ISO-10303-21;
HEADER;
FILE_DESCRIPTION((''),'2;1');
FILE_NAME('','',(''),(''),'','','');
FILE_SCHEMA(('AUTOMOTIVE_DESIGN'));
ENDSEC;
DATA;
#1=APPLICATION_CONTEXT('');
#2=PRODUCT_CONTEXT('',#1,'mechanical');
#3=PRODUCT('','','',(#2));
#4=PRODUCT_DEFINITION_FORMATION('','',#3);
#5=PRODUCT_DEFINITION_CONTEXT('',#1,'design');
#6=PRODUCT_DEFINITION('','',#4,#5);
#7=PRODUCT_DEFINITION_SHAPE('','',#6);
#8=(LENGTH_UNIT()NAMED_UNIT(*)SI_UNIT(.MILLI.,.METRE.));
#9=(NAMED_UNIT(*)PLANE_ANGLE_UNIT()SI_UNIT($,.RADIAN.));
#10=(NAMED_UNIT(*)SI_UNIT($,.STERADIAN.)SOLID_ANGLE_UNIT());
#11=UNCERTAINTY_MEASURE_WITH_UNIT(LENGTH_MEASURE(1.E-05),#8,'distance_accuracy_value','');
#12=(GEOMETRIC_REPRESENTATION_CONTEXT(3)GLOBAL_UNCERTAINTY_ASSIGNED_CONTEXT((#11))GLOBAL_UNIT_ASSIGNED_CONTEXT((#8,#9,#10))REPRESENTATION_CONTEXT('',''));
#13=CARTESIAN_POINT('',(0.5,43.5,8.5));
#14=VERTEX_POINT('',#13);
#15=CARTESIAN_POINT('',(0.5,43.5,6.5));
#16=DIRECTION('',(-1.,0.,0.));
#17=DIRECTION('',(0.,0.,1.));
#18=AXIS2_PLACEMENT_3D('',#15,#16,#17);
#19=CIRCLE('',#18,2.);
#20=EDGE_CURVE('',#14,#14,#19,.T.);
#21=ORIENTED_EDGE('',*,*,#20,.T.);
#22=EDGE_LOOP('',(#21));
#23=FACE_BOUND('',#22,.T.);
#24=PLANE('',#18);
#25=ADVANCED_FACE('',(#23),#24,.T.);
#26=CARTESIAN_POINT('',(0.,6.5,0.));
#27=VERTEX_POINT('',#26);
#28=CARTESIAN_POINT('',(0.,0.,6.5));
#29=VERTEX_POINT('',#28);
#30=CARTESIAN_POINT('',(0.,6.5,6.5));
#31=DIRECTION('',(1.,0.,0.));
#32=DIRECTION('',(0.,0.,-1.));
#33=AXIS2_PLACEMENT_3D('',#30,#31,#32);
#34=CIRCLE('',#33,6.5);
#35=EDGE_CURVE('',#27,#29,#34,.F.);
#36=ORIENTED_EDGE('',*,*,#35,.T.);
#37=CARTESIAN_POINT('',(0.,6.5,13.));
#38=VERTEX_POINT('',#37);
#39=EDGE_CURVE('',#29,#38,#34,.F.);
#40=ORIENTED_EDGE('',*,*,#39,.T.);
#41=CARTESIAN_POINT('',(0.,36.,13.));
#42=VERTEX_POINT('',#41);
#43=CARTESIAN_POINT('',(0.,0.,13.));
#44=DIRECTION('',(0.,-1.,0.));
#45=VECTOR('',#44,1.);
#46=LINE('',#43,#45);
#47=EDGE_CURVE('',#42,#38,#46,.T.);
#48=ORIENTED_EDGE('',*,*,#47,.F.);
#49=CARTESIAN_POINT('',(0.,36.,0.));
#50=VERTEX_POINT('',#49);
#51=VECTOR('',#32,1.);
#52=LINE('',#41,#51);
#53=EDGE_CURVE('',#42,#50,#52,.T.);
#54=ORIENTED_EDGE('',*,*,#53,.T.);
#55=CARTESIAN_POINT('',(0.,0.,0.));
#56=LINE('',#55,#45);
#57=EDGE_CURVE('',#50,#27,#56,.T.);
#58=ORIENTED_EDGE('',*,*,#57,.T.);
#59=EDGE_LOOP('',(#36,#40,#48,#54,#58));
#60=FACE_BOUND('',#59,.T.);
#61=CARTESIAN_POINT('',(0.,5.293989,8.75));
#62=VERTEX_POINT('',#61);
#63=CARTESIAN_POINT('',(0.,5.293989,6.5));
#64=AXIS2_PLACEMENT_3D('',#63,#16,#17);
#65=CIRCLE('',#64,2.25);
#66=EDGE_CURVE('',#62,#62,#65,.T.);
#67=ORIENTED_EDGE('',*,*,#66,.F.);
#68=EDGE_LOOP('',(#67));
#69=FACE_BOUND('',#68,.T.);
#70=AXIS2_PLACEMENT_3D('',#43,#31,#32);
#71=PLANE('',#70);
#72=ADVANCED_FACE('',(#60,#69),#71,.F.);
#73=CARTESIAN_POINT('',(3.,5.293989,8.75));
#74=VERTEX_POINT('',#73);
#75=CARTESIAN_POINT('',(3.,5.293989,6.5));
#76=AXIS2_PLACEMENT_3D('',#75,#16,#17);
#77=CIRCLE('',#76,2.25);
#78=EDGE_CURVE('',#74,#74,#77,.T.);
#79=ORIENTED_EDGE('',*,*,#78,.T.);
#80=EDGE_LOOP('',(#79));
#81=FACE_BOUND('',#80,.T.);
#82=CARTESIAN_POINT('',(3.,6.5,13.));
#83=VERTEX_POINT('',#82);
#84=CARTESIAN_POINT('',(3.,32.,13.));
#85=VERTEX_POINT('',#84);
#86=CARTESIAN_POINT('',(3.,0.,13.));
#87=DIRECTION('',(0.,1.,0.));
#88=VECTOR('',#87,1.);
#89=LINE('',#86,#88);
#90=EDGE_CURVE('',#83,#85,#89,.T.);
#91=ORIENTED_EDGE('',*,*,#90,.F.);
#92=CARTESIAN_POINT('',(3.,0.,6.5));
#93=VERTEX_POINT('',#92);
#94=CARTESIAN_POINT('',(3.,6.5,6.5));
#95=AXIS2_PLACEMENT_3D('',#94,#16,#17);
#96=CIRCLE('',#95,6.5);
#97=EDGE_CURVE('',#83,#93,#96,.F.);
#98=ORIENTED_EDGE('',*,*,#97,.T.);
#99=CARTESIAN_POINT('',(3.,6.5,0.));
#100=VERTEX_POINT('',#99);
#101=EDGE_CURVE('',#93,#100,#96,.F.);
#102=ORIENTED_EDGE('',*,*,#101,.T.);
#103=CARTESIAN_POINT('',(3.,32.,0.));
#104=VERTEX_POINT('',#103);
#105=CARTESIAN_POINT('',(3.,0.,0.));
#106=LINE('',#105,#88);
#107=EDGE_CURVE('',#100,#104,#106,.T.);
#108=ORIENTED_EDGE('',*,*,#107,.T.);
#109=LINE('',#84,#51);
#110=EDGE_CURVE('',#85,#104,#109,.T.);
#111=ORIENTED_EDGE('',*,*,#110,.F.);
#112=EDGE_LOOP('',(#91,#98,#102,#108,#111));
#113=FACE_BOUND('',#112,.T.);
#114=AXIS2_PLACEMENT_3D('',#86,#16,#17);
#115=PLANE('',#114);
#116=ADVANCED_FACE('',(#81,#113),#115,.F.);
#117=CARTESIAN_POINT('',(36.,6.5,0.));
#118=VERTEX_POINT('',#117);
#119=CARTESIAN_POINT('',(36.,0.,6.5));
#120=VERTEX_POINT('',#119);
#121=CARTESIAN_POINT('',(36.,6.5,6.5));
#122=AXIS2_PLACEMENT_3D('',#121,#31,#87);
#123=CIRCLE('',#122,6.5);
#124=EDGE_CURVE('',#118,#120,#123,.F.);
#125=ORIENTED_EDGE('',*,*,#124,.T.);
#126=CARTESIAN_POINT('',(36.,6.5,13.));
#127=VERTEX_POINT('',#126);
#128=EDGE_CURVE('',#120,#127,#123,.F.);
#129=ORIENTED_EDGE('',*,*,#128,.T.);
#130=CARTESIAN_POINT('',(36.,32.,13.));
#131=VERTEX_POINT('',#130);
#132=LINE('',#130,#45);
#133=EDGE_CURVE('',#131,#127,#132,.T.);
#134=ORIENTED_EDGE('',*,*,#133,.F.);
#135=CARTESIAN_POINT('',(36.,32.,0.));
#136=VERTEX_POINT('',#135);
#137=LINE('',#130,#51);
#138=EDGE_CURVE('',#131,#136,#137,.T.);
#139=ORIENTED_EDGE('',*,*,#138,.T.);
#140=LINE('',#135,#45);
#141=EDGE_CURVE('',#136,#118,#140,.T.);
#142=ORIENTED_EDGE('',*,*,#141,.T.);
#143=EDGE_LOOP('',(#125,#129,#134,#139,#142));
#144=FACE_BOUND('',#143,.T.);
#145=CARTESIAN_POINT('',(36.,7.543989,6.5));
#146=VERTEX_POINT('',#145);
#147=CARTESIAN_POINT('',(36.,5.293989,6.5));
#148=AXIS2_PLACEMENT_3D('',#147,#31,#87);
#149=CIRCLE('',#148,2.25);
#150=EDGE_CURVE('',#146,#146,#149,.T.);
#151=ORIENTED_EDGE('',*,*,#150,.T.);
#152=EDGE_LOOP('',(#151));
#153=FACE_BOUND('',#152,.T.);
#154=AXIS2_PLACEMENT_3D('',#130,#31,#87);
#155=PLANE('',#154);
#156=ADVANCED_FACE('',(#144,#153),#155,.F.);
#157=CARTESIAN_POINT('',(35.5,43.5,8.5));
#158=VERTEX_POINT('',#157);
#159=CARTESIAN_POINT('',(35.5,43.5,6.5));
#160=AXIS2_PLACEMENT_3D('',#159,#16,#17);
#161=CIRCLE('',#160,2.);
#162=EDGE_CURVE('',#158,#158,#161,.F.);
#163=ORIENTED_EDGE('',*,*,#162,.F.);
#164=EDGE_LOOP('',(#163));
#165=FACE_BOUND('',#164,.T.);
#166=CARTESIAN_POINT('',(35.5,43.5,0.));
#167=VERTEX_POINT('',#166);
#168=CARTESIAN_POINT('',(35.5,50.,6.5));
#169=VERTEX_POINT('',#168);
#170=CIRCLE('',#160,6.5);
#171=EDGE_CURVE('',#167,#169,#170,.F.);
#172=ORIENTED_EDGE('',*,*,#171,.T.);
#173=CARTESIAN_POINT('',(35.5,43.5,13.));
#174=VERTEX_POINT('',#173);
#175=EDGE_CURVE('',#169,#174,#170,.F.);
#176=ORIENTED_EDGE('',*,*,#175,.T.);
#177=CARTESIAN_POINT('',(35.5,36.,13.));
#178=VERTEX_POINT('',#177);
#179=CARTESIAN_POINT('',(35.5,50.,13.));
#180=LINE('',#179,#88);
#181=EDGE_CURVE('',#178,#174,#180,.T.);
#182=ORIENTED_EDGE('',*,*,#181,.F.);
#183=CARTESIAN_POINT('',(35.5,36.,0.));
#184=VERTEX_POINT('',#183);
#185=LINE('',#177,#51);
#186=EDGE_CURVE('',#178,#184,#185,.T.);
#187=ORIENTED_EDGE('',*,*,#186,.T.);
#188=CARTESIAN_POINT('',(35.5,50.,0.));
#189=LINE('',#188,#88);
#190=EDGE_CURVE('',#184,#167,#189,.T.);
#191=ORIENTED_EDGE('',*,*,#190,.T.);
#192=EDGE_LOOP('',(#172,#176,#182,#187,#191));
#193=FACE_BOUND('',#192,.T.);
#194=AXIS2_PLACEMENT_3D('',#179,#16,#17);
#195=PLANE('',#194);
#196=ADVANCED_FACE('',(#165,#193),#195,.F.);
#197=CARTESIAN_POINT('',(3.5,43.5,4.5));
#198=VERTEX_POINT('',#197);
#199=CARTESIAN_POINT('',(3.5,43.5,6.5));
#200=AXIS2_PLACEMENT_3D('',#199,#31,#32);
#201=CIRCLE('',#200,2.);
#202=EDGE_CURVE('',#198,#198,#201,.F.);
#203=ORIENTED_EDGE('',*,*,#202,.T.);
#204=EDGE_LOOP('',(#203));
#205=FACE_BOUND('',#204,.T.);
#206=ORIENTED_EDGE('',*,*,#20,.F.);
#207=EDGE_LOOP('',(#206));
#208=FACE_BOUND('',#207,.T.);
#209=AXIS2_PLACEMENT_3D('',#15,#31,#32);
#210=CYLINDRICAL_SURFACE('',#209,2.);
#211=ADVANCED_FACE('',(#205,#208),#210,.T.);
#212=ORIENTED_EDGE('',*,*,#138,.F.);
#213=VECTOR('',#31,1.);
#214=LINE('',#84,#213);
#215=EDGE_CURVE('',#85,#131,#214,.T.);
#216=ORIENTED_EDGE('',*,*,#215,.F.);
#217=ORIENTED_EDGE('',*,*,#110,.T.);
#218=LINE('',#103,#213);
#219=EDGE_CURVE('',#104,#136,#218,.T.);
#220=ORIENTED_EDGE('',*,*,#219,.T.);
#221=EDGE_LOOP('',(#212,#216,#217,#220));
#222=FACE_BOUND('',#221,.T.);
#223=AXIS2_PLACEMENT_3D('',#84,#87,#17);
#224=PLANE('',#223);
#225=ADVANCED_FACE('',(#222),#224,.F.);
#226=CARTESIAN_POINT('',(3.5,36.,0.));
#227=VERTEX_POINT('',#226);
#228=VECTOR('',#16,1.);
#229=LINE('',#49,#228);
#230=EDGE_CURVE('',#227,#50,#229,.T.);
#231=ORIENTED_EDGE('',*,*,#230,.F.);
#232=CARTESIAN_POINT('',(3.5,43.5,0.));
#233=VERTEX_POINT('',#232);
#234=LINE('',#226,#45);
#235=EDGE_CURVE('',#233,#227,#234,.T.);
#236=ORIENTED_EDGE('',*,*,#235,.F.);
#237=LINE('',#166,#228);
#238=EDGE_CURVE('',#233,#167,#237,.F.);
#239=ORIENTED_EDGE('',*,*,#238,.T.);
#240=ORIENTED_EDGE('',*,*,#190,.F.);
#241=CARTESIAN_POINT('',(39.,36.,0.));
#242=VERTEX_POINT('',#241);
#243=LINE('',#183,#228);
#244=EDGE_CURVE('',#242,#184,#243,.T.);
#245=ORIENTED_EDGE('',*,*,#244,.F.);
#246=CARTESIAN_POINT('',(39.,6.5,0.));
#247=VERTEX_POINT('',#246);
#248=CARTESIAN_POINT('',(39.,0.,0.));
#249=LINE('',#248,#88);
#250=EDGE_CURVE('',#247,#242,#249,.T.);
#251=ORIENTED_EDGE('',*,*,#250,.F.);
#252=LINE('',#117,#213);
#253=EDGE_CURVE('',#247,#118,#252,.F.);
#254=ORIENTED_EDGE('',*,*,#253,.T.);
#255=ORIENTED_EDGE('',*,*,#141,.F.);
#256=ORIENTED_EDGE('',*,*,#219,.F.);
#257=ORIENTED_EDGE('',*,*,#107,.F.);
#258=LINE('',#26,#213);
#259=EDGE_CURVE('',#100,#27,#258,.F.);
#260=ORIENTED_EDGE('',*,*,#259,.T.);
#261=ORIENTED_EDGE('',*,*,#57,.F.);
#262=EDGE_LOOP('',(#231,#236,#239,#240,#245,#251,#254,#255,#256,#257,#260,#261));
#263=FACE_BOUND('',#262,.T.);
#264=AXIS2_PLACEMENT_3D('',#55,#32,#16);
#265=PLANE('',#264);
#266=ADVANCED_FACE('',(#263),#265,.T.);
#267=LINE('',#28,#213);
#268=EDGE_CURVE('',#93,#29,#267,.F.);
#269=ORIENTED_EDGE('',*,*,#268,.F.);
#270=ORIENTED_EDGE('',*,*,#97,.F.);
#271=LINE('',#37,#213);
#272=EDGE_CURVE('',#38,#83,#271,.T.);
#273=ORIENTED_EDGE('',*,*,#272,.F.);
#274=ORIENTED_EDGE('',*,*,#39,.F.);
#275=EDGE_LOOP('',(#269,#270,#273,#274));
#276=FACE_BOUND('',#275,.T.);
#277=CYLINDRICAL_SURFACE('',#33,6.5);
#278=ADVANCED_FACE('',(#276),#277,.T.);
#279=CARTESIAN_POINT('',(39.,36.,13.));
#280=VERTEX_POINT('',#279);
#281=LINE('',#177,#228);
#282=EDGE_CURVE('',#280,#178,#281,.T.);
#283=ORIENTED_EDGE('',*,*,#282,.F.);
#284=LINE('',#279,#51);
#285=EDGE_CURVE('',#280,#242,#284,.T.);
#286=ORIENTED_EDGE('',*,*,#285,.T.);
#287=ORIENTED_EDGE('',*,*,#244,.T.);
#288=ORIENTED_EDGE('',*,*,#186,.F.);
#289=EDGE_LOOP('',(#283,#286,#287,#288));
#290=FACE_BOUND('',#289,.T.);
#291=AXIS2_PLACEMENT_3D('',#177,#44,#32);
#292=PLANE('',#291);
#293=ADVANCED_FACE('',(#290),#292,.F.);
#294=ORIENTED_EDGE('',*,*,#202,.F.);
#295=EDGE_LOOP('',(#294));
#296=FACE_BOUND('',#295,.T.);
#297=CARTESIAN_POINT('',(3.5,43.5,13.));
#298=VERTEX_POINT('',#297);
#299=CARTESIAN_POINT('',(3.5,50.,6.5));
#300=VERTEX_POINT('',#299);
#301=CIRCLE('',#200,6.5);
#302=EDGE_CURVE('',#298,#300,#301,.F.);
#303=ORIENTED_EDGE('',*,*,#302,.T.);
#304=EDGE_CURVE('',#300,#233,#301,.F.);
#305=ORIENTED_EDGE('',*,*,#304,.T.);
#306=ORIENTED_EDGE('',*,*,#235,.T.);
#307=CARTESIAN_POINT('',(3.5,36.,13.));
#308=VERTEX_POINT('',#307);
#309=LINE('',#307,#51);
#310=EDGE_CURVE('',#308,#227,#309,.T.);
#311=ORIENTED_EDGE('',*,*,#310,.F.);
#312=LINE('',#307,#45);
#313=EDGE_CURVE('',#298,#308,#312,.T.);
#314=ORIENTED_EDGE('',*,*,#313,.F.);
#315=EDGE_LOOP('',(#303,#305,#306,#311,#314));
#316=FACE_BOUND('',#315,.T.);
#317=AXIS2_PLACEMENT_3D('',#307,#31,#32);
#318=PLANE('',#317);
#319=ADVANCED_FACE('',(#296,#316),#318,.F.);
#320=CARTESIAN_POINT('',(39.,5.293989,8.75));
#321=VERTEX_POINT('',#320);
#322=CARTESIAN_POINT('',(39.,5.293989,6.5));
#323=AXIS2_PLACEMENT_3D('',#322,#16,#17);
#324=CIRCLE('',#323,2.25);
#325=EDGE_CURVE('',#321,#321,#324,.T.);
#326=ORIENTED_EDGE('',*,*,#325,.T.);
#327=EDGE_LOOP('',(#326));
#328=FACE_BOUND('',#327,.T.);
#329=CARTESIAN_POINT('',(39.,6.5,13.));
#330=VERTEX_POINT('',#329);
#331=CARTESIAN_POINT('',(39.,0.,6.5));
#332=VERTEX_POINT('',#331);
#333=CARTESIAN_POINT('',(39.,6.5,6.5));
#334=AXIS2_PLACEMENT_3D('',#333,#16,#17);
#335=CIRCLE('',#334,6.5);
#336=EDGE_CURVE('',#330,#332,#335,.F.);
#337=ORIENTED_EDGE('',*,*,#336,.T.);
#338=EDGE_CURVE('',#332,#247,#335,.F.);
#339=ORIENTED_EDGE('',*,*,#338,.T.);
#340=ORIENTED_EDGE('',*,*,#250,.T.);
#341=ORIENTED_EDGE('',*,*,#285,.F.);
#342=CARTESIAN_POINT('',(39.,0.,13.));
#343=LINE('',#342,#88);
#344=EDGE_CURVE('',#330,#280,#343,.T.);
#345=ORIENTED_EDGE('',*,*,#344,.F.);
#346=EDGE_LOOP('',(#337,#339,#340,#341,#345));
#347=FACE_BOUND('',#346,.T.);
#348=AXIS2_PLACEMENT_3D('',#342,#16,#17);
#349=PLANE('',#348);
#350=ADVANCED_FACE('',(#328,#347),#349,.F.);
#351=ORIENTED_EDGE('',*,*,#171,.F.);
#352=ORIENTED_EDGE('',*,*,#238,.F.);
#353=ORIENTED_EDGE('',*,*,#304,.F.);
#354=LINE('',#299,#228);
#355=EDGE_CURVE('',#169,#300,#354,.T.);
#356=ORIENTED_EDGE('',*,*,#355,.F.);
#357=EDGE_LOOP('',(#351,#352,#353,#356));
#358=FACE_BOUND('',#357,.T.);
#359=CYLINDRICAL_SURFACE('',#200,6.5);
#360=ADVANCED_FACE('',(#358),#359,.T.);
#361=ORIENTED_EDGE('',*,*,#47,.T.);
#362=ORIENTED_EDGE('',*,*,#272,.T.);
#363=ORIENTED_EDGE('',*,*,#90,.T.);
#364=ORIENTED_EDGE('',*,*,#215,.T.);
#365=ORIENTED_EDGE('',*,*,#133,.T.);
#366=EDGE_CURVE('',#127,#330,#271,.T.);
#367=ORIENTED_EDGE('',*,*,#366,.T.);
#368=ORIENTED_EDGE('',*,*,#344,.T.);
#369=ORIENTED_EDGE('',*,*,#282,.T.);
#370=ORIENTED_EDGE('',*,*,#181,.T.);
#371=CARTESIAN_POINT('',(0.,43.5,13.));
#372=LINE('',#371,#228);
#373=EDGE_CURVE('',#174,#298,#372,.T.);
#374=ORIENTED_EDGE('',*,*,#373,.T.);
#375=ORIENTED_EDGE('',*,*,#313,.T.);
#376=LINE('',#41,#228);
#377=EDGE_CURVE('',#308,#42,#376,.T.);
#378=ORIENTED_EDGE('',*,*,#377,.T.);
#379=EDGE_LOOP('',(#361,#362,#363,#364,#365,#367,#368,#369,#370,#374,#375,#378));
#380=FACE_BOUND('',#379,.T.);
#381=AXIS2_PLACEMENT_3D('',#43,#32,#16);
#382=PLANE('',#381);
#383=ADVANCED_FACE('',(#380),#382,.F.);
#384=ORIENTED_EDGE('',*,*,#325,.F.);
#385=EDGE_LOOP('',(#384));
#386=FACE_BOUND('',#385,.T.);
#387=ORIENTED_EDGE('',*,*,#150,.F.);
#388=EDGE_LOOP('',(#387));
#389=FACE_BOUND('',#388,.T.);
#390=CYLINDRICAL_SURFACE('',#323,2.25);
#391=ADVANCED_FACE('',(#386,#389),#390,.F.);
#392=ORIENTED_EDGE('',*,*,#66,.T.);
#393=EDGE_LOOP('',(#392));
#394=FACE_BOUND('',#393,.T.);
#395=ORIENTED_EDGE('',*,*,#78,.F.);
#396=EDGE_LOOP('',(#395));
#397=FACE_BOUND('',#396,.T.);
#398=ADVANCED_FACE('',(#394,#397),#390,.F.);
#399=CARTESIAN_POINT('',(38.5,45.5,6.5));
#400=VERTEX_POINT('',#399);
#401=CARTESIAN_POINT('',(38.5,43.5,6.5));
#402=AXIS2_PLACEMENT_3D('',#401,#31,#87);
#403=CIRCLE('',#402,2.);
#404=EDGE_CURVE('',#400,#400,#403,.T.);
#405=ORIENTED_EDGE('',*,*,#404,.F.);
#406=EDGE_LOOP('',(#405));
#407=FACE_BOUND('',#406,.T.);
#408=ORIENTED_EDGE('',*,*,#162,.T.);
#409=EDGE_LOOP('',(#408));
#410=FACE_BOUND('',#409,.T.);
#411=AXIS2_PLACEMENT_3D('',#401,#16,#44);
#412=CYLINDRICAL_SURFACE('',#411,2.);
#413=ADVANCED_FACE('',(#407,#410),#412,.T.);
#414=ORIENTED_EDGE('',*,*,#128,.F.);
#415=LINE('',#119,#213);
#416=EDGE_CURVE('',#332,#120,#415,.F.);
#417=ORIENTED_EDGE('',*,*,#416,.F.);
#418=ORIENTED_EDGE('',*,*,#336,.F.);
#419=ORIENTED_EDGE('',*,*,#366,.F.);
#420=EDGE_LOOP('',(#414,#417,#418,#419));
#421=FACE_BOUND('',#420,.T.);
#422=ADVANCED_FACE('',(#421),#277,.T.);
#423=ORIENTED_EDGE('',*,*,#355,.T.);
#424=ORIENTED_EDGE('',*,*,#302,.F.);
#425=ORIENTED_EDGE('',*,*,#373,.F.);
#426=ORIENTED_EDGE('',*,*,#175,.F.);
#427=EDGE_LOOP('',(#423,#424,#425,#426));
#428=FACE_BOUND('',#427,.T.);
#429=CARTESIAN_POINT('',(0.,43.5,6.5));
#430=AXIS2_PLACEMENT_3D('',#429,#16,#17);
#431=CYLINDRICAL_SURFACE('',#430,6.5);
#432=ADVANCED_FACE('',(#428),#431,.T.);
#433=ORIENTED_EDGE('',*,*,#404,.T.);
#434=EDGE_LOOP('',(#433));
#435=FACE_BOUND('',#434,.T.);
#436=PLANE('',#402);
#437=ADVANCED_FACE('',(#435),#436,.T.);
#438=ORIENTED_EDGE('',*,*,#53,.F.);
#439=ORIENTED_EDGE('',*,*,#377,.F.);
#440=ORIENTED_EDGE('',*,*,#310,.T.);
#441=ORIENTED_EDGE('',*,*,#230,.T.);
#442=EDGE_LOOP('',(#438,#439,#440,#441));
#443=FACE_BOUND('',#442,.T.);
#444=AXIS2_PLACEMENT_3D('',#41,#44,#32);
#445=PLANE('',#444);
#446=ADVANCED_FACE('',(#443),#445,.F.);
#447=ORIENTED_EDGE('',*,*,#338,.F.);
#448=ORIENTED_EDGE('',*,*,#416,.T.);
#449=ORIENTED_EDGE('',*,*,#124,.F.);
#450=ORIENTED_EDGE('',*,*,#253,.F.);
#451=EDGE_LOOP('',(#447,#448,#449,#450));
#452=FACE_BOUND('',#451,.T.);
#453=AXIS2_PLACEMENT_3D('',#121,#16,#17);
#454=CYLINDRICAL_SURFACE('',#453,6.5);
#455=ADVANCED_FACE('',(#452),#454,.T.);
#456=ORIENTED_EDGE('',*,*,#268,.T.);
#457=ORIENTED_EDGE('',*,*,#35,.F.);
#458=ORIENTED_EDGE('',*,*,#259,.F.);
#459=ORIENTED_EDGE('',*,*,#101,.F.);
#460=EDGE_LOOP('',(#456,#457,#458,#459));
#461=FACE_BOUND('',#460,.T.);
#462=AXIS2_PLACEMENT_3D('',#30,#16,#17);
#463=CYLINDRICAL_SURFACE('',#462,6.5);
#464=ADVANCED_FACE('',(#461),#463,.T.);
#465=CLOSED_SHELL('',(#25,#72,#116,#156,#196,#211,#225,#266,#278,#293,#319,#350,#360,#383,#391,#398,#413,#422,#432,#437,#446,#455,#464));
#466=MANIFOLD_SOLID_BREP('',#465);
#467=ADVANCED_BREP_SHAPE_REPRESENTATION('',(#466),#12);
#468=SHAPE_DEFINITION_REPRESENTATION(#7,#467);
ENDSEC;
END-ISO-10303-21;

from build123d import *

# Parameters (mm, degrees)
BOSS_EXTRUDE1_DEPTH = 13
SKETCH2_R           = 2.25
CUT_EXTRUDE1_DEPTH  = 65.730209331
SKETCH3_R           = 2
BOSS_EXTRUDE2_DEPTH = 3
BOSS_EXTRUDE3_START = 3
SKETCH4_R           = 2
BOSS_EXTRUDE3_DEPTH = 3
FILLET1_R           = 6.5
FILLET2_R           = 6.5


with BuildPart() as part:
    # Sketch1 → Boss-Extrude1 (new body)
    with BuildSketch(Plane.XY):
        Polygon((3, 0), (3, 32), (36, 32), (36, 0), (39, 0), (39, 36), (35.5, 36), (35.5, 50), (3.5, 50), (3.5, 36), (0, 36), (0, 0), align=None)
    extrude(amount=BOSS_EXTRUDE1_DEPTH)

    # Sketch2 → Cut-Extrude1 (cut, through all)
    with BuildSketch(Plane.ZY):
        with Locations((6.5, 5.293988539)):
            Circle(SKETCH2_R)
    extrude(amount=-CUT_EXTRUDE1_DEPTH, mode=Mode.SUBTRACT)

    # Sketch3 → Boss-Extrude2 (add)
    with BuildSketch(Plane.ZY.offset(-3.5)):
        with Locations(Location((6.5, 43.5, 0), (0, 0, 180))):
            Circle(SKETCH3_R)
    extrude(amount=BOSS_EXTRUDE2_DEPTH)

    # Sketch4 → Boss-Extrude3 (add)
    with BuildSketch(Plane(origin=(35.5, 0, 0), x_dir=(0, 0, -1), z_dir=(1, 0, 0)).offset(BOSS_EXTRUDE3_START)):
        with Locations((-6.5, 43.5)):
            Circle(SKETCH4_R)
    extrude(amount=-BOSS_EXTRUDE3_DEPTH)

    # Fillet1
    fillet1_edges = [part.edges().sort_by_distance(p)[0] for p in [
        (1.5, 0, 0),
        (1.5, 0, 13),
        (37.5, 0, 0),
        (37.5, 0, 13),
    ]]
    fillet(fillet1_edges, radius=FILLET1_R - 0.0001)  # a hair under: the kernel refuses the full size

    # Fillet2
    fillet2_edges = [part.edges().sort_by_distance(p)[0] for p in [
        (19.5, 50, 13),
        (19.5, 50, 0),
    ]]
    fillet(fillet2_edges, radius=FILLET2_R - 0.0001)  # a hair under: the kernel refuses the full size


solid = part.part
